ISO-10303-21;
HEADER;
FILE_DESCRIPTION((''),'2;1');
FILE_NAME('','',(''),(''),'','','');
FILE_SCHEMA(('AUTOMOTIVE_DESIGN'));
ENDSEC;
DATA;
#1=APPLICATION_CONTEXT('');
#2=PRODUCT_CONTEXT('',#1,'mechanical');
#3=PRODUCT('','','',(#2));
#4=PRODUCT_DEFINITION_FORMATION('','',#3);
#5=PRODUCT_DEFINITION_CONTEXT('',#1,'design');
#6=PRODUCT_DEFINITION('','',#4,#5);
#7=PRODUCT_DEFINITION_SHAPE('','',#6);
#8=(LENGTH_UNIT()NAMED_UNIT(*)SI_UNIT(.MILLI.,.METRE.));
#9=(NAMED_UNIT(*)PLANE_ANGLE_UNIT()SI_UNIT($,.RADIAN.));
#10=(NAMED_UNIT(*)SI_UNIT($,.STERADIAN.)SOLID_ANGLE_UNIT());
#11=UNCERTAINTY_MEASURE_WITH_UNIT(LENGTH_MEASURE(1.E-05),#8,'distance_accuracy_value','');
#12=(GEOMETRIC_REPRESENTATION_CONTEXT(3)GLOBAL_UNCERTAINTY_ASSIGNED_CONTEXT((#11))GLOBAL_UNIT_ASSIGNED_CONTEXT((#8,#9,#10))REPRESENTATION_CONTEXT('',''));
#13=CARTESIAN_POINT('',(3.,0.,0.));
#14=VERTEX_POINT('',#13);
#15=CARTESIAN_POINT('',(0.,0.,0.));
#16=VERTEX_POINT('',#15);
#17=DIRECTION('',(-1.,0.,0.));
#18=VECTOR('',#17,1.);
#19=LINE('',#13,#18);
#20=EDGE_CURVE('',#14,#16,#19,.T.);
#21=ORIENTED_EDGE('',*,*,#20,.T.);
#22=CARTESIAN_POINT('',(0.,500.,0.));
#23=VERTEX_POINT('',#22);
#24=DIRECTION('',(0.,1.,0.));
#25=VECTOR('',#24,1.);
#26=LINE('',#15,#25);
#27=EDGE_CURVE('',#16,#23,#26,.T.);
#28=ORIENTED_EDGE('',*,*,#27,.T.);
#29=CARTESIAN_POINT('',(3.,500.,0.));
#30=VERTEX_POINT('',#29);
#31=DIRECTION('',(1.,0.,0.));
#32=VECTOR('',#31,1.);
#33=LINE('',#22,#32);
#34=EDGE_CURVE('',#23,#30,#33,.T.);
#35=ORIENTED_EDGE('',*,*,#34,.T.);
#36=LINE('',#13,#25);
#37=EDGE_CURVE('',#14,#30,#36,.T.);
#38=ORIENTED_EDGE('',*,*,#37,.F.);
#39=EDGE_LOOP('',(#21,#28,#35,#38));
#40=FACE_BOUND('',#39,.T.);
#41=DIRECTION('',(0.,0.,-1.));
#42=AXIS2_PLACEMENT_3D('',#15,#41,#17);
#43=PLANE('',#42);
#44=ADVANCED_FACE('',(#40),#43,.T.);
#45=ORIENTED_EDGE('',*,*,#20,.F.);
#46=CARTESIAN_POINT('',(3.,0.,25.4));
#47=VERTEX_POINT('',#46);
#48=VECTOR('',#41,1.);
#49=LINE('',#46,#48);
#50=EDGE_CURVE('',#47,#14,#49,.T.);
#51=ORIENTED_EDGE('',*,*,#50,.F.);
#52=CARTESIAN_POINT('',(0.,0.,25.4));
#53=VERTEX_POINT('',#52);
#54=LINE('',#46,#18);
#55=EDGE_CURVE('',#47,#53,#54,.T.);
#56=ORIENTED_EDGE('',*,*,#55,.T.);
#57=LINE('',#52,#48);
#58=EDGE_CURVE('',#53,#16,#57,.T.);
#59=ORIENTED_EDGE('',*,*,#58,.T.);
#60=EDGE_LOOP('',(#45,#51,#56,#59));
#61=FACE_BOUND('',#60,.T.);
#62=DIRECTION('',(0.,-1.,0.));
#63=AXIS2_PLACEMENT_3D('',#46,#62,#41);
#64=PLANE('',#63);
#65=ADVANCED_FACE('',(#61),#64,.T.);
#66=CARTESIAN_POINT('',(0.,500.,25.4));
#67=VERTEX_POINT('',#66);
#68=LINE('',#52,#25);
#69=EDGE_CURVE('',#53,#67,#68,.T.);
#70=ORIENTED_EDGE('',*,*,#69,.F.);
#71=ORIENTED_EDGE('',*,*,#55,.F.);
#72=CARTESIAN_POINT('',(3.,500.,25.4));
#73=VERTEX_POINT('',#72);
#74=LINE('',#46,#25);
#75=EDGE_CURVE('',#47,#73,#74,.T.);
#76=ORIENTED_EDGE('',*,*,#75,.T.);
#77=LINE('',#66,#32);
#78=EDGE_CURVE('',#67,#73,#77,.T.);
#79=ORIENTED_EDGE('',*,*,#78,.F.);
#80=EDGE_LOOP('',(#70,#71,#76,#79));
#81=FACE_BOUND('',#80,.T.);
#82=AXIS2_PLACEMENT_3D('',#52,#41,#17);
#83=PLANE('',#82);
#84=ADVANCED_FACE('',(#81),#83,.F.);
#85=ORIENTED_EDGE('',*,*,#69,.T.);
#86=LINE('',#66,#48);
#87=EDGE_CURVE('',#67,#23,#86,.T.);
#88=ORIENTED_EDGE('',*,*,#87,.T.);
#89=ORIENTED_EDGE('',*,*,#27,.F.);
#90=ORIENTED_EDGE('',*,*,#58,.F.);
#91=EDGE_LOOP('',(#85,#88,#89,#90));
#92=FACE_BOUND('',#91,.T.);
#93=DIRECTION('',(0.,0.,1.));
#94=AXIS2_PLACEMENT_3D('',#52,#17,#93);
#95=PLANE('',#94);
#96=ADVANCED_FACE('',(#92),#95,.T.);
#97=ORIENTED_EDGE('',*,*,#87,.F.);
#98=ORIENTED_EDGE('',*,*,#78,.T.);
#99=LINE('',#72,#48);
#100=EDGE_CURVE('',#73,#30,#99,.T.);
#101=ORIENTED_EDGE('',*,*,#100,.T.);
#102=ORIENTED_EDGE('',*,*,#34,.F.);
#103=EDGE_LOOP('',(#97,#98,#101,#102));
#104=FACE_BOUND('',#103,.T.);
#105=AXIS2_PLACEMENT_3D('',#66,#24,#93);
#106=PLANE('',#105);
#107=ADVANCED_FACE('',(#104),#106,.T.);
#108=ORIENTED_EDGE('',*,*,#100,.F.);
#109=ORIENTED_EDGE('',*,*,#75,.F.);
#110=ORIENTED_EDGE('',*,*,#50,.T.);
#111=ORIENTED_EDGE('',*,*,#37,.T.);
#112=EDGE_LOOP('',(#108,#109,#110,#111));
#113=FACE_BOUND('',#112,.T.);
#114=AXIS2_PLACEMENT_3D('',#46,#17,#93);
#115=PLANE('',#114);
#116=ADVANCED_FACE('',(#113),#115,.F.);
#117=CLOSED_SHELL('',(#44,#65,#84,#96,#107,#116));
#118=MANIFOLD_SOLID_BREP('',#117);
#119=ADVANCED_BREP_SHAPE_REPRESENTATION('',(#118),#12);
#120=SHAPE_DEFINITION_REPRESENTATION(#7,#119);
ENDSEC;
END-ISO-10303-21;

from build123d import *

# Parameters (mm, degrees)
ESBO_O1_W          = 3
ESBO_O1_H          = 500
FLANGE_BASE1_DEPTH = 25.4


# Sheet-metal steps are written as plain solids
with BuildPart() as part:
    # Esboço1 → Flange-base1 (new body)
    with BuildSketch(Plane.XY):
        with Locations((1.5, 250)):
            Rectangle(ESBO_O1_W, ESBO_O1_H)
    extrude(amount=FLANGE_BASE1_DEPTH)


solid = part.part
